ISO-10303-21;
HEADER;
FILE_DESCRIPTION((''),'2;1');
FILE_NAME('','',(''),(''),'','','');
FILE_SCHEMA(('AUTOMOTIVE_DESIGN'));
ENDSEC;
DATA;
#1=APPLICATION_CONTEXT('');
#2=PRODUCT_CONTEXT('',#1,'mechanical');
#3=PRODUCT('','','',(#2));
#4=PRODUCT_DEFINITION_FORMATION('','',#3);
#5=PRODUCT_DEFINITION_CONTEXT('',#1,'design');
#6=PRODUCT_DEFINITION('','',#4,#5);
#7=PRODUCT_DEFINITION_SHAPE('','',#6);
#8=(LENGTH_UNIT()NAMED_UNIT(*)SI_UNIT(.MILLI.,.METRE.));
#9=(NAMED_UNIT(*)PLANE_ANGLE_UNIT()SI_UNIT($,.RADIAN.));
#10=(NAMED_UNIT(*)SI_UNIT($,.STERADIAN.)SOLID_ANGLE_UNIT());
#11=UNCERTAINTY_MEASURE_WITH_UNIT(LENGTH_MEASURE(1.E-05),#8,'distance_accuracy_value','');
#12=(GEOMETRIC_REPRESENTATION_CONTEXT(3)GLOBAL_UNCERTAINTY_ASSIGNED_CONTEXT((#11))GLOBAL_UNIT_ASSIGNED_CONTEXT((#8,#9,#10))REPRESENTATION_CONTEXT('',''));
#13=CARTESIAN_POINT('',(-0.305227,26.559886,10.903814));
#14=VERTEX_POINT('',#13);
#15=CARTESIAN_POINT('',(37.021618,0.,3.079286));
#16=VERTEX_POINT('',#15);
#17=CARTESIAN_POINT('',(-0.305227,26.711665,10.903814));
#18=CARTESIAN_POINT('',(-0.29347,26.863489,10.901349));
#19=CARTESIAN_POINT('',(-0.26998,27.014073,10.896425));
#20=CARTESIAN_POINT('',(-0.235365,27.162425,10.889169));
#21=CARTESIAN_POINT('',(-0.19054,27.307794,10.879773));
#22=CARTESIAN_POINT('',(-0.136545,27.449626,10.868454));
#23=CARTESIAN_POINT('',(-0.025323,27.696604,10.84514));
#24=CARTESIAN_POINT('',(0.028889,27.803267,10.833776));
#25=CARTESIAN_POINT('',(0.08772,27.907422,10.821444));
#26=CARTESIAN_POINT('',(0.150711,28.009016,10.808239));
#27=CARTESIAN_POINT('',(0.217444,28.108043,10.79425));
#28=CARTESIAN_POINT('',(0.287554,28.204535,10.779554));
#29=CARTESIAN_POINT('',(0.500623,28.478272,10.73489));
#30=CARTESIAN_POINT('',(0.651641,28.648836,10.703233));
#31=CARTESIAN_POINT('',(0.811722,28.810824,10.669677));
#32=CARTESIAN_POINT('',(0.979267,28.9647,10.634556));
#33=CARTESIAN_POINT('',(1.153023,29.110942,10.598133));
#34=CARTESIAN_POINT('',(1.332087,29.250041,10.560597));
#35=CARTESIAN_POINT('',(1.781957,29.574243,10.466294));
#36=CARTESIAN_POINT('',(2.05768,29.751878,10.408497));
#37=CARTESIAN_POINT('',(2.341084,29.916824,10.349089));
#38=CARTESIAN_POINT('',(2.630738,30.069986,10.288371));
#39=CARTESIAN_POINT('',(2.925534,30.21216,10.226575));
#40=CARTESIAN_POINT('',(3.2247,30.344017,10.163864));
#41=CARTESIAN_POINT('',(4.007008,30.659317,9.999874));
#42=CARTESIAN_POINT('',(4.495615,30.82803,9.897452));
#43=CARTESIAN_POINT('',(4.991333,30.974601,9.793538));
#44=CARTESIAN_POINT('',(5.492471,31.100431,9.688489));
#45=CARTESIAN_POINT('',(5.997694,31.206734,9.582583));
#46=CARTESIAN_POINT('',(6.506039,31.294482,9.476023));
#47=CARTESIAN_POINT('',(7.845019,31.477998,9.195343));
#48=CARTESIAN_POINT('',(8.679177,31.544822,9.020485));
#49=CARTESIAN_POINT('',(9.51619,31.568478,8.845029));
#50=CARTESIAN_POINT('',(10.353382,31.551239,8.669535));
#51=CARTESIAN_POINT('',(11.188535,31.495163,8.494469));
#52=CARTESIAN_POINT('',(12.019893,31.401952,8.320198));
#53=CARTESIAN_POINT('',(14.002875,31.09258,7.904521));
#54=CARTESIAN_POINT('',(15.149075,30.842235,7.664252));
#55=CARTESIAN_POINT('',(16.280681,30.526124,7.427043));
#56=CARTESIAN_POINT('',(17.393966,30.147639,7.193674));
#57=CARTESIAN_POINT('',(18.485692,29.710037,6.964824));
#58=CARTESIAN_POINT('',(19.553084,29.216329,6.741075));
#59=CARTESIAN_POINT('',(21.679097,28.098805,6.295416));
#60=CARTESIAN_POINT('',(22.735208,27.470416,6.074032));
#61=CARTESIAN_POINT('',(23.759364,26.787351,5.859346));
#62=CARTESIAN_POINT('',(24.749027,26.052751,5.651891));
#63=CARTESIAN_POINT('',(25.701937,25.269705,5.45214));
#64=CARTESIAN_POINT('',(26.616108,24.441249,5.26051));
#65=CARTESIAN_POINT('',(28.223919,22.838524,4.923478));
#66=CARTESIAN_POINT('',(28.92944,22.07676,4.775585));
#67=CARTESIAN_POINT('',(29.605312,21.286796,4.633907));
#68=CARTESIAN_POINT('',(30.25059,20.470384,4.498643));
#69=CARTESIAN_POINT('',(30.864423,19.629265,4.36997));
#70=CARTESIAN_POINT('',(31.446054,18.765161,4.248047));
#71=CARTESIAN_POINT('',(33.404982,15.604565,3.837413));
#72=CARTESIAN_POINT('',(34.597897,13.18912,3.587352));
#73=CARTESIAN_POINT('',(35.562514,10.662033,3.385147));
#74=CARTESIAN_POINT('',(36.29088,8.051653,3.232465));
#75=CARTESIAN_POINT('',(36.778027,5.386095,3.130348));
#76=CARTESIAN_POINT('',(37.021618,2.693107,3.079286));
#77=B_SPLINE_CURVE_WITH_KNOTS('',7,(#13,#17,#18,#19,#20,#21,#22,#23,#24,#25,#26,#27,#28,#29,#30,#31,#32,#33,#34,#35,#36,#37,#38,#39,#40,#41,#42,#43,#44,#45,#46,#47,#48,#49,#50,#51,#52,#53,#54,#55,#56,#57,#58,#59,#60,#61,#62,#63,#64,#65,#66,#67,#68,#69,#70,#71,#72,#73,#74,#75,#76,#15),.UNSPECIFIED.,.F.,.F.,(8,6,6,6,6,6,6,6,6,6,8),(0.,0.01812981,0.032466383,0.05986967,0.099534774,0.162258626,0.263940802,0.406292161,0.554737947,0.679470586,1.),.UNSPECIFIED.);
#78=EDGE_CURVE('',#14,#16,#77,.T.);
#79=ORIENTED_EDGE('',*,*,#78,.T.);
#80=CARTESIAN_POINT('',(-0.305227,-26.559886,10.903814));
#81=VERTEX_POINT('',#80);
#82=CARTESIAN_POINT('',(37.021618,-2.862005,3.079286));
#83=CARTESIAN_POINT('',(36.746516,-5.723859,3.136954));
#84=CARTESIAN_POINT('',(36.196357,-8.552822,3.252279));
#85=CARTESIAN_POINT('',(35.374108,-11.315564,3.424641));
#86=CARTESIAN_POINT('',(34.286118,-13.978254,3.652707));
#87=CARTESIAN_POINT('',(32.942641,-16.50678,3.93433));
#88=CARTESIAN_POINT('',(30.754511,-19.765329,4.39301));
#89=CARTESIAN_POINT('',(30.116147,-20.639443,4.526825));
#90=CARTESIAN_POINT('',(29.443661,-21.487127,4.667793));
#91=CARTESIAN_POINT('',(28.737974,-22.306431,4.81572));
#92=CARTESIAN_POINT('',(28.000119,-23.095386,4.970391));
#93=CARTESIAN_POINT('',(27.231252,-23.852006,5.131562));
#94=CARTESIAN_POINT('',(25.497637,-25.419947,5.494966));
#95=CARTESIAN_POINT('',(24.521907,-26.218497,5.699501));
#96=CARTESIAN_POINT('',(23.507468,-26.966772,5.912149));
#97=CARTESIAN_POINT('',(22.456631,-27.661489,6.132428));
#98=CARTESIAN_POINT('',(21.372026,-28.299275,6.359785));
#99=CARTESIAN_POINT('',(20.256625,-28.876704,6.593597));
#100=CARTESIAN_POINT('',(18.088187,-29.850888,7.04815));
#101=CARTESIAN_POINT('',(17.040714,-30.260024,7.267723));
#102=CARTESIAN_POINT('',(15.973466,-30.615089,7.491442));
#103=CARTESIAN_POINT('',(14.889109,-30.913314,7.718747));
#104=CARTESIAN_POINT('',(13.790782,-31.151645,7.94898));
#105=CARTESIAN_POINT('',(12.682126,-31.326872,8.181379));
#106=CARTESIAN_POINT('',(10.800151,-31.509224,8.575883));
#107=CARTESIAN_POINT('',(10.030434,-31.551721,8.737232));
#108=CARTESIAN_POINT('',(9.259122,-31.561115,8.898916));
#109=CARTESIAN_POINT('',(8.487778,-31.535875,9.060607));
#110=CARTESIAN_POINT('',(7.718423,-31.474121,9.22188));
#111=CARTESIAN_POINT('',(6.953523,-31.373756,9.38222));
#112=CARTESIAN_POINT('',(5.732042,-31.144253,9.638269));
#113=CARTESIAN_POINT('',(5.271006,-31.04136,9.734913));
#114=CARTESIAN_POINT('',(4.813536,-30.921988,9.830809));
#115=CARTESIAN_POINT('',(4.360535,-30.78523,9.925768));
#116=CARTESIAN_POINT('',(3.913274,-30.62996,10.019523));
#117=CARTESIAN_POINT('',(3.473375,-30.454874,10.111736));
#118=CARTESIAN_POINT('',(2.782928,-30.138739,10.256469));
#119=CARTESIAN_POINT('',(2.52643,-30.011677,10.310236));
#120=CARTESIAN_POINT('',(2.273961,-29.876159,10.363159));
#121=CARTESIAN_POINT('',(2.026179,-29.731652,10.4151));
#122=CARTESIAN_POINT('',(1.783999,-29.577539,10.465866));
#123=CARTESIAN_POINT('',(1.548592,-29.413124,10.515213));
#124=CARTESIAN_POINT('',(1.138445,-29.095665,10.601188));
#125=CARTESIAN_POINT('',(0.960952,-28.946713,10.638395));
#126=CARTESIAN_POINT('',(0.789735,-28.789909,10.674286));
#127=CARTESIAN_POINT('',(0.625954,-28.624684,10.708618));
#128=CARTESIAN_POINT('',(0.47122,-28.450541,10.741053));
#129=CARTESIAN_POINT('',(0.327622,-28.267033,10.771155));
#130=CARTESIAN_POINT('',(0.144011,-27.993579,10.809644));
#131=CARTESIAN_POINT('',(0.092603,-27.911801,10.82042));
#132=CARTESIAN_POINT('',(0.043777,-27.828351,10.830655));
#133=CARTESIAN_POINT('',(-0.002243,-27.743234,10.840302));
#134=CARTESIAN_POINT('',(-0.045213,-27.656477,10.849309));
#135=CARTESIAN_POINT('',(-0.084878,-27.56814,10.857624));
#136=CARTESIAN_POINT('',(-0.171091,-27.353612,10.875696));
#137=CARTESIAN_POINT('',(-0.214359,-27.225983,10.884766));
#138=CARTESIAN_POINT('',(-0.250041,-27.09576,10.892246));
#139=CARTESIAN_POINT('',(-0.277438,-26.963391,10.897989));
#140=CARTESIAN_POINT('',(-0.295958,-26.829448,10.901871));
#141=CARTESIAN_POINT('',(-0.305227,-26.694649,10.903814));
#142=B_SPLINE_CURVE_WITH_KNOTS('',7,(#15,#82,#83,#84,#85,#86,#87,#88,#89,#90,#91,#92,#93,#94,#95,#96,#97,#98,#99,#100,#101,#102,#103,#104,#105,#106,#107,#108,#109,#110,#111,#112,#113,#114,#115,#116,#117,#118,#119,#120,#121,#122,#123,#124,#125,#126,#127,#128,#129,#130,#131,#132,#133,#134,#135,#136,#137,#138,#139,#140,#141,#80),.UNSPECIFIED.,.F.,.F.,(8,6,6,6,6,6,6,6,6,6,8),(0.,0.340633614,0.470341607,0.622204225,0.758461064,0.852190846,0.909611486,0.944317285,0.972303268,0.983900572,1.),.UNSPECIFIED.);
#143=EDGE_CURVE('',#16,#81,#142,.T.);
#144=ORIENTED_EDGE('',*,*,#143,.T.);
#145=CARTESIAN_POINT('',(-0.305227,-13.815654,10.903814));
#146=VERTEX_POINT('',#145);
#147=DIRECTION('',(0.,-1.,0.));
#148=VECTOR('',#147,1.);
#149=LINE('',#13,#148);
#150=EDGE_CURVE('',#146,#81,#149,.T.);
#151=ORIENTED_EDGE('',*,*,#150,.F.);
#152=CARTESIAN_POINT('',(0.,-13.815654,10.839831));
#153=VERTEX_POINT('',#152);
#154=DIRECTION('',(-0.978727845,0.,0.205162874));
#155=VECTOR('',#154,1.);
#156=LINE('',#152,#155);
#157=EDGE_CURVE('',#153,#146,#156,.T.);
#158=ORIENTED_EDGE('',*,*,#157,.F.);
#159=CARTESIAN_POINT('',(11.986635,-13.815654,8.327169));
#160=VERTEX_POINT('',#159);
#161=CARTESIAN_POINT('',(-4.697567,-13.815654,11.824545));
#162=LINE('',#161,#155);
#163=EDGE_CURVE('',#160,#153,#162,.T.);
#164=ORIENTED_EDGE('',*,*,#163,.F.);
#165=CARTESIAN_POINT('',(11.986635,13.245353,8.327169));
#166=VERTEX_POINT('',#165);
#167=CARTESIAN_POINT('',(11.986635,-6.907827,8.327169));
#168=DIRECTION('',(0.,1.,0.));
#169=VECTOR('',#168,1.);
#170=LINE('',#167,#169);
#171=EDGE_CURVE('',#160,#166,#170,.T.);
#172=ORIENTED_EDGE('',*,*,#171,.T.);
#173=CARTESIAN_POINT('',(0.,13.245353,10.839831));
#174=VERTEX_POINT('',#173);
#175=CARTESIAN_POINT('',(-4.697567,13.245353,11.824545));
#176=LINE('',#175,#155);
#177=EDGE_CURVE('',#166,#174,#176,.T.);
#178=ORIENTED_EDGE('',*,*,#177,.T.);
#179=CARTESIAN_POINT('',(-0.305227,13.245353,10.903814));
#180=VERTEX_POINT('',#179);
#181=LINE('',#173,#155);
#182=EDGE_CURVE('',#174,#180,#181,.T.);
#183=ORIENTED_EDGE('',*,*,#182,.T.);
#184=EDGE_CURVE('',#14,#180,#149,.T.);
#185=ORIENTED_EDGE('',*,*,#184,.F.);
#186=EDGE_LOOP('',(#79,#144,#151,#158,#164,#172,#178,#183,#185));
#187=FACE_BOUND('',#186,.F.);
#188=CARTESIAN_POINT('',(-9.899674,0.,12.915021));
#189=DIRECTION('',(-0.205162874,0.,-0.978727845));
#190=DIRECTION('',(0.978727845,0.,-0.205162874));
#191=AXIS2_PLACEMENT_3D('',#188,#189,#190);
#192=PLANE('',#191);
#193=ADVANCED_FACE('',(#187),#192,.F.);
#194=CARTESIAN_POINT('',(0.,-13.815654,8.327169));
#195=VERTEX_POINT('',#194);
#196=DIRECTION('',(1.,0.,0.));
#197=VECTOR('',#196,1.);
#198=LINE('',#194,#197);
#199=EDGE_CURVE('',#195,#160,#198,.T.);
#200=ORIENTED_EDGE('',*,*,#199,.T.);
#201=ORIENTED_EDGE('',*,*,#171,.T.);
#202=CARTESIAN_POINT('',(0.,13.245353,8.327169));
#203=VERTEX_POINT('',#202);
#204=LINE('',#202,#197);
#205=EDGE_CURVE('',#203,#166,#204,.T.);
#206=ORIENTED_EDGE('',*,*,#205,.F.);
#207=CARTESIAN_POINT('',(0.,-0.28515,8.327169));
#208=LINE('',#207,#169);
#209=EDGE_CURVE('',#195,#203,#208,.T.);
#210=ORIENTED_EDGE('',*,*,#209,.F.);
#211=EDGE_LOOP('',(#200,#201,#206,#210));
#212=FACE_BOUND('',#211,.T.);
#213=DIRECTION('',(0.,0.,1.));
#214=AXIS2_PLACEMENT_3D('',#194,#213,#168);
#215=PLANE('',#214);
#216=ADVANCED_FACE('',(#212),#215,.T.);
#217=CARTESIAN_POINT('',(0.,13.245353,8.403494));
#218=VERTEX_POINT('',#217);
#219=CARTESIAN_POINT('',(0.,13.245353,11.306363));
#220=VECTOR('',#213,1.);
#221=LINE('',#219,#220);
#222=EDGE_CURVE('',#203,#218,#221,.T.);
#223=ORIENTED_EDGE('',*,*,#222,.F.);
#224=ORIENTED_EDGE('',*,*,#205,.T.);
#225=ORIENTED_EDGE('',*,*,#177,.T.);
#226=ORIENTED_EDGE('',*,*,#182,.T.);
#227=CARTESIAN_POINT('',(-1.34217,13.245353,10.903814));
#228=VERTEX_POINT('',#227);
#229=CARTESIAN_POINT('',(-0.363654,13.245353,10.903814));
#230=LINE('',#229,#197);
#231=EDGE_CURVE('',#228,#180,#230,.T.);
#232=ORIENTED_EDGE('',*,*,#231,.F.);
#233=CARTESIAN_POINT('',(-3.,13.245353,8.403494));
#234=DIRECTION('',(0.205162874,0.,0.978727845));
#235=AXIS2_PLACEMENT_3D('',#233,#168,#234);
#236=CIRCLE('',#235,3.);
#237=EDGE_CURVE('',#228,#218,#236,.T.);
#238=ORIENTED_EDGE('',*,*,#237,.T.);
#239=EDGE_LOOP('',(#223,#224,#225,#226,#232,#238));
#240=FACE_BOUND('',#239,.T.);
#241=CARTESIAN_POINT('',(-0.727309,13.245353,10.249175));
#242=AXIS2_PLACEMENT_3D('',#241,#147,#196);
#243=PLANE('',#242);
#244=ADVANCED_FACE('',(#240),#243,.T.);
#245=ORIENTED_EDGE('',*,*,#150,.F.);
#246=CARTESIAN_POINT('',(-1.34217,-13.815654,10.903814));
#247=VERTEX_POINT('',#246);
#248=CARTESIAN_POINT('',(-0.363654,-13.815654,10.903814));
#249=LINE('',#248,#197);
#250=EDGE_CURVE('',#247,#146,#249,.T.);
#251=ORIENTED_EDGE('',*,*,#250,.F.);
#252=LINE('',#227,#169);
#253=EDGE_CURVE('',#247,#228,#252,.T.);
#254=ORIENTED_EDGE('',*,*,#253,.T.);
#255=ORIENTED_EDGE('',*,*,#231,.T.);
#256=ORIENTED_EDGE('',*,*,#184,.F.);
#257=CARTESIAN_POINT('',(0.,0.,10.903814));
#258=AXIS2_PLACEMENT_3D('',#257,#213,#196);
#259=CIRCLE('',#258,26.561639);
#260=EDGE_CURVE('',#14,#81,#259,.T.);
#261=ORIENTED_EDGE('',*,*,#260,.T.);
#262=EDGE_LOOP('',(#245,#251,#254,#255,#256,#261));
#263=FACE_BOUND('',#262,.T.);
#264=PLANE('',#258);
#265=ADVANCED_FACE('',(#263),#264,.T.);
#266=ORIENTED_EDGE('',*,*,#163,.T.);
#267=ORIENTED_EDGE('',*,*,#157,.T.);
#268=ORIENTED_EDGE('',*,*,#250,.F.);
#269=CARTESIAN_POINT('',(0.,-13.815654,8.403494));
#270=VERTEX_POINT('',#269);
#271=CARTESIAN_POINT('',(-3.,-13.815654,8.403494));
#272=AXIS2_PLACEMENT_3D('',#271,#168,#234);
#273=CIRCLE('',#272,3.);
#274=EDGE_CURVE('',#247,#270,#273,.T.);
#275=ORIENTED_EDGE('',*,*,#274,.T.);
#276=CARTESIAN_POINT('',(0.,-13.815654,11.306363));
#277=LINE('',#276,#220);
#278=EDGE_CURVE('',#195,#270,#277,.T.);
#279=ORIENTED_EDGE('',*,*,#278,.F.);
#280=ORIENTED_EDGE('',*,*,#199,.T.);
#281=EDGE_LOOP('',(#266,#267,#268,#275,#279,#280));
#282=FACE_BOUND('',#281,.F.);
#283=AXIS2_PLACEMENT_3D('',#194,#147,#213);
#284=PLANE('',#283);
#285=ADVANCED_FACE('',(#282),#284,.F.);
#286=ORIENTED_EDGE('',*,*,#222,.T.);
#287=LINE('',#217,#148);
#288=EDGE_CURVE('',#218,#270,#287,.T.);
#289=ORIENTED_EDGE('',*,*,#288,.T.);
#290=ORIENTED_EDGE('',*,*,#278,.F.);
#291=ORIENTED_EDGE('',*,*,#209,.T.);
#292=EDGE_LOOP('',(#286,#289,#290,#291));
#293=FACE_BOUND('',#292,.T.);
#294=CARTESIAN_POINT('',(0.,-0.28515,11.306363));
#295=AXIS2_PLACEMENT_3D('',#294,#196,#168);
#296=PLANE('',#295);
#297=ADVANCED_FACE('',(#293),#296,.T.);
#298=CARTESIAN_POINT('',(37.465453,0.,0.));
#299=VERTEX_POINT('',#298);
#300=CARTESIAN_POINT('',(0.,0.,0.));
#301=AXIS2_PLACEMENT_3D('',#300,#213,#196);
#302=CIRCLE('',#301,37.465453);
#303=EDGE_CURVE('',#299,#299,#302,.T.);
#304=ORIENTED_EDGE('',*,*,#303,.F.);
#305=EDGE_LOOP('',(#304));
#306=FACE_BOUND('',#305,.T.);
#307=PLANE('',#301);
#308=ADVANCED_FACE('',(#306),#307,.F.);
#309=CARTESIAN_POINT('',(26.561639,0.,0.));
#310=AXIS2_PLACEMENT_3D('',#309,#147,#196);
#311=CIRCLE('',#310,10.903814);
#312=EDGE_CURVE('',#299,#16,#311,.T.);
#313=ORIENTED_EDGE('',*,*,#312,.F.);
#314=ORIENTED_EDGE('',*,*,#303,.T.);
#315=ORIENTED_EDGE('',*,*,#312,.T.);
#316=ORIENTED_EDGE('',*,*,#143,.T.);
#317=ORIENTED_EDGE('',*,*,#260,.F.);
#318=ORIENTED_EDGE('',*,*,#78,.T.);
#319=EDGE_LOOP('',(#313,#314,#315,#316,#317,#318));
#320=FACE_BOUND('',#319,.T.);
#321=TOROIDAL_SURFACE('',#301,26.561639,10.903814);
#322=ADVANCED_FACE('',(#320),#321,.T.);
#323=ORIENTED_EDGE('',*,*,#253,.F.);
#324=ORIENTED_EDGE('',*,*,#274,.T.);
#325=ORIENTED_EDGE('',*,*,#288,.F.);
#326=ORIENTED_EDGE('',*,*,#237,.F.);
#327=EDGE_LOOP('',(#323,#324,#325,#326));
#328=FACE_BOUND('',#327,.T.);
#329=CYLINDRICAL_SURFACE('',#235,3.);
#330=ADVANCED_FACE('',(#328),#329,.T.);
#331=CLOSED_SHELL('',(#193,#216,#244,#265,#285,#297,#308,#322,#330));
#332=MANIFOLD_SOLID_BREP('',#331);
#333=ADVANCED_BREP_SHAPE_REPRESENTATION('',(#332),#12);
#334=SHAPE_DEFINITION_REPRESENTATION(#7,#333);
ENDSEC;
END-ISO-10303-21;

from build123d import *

# Parameters (mm, degrees)
F3_DEPTH      = 37.4664531479
F3_DEPTH_BACK = 37.4664531479
F4_W          = 27.0610069856
F4_H          = 5.9583876282
F5_DEPTH      = 37.4664532479
F6_T1_DEPTH   = 27.0610069856


# Not quite as in the source:
# - a fillet or chamfer that OpenCascade refuses, or shapes differently, is made with other operations: its cross-section is extruded or revolved along the edge and cut away or added


with BuildPart() as f1:
    # F0 (on Front) → F1 (revolve)
    with BuildSketch(Plane.XZ):
        with BuildLine():
            Line((0, 10.9038136992), (0, 0))
            Line((0, 0), (37.4654531479, 0))
            ThreePointArc((37.4654531479, 0), (34.2718000562, 7.7101606075), (26.5616394487, 10.9038136992))
            Line((26.5616394487, 10.9038136992), (0, 10.9038136992))
        make_face()
    revolve(axis=Axis((0, 0, 5.4519068496), (0, 0, 1)))

    # F2 (on Front) → F3 (cut, two sides)
    with BuildSketch(Plane.XZ) as f3_sk:
        Polygon((-10.2507751435, 15.1971811429), (-9.8996739835, 12.9150208086), (41.1855690181, 2.2064307705), (41.1855690181, 15.1971811429), align=None)
    extrude(amount=-F3_DEPTH, mode=Mode.SUBTRACT)
    extrude(f3_sk.sketch, amount=F3_DEPTH_BACK, mode=Mode.SUBTRACT)

    # F4 (on Right) → F5 (cut, through all)
    with BuildSketch(Plane.YZ):
        with Locations((-0.2851500176, 11.3063631579)):
            Rectangle(F4_W, F4_H)
    extrude(amount=F5_DEPTH, mode=Mode.SUBTRACT)

    # F6: fillet of radius 3 on 1 edges, made by hand

    # F6_s2 → F6_t1 (cut)
    with BuildSketch(Plane.XZ.offset(-13.2453534752)):
        with BuildLine():
            ThreePointArc((-2.3845113791, 11.3396775065), (-0.6712164267, 10.2947282416), (0, 8.4034939704))
            Line((0, 8.4034939704), (0, 10.8398314981))
            Line((0, 10.8398314981), (-2.3845113791, 11.3396775065))
        make_face()
    extrude(amount=F6_T1_DEPTH, mode=Mode.SUBTRACT)


solid = f1.part
